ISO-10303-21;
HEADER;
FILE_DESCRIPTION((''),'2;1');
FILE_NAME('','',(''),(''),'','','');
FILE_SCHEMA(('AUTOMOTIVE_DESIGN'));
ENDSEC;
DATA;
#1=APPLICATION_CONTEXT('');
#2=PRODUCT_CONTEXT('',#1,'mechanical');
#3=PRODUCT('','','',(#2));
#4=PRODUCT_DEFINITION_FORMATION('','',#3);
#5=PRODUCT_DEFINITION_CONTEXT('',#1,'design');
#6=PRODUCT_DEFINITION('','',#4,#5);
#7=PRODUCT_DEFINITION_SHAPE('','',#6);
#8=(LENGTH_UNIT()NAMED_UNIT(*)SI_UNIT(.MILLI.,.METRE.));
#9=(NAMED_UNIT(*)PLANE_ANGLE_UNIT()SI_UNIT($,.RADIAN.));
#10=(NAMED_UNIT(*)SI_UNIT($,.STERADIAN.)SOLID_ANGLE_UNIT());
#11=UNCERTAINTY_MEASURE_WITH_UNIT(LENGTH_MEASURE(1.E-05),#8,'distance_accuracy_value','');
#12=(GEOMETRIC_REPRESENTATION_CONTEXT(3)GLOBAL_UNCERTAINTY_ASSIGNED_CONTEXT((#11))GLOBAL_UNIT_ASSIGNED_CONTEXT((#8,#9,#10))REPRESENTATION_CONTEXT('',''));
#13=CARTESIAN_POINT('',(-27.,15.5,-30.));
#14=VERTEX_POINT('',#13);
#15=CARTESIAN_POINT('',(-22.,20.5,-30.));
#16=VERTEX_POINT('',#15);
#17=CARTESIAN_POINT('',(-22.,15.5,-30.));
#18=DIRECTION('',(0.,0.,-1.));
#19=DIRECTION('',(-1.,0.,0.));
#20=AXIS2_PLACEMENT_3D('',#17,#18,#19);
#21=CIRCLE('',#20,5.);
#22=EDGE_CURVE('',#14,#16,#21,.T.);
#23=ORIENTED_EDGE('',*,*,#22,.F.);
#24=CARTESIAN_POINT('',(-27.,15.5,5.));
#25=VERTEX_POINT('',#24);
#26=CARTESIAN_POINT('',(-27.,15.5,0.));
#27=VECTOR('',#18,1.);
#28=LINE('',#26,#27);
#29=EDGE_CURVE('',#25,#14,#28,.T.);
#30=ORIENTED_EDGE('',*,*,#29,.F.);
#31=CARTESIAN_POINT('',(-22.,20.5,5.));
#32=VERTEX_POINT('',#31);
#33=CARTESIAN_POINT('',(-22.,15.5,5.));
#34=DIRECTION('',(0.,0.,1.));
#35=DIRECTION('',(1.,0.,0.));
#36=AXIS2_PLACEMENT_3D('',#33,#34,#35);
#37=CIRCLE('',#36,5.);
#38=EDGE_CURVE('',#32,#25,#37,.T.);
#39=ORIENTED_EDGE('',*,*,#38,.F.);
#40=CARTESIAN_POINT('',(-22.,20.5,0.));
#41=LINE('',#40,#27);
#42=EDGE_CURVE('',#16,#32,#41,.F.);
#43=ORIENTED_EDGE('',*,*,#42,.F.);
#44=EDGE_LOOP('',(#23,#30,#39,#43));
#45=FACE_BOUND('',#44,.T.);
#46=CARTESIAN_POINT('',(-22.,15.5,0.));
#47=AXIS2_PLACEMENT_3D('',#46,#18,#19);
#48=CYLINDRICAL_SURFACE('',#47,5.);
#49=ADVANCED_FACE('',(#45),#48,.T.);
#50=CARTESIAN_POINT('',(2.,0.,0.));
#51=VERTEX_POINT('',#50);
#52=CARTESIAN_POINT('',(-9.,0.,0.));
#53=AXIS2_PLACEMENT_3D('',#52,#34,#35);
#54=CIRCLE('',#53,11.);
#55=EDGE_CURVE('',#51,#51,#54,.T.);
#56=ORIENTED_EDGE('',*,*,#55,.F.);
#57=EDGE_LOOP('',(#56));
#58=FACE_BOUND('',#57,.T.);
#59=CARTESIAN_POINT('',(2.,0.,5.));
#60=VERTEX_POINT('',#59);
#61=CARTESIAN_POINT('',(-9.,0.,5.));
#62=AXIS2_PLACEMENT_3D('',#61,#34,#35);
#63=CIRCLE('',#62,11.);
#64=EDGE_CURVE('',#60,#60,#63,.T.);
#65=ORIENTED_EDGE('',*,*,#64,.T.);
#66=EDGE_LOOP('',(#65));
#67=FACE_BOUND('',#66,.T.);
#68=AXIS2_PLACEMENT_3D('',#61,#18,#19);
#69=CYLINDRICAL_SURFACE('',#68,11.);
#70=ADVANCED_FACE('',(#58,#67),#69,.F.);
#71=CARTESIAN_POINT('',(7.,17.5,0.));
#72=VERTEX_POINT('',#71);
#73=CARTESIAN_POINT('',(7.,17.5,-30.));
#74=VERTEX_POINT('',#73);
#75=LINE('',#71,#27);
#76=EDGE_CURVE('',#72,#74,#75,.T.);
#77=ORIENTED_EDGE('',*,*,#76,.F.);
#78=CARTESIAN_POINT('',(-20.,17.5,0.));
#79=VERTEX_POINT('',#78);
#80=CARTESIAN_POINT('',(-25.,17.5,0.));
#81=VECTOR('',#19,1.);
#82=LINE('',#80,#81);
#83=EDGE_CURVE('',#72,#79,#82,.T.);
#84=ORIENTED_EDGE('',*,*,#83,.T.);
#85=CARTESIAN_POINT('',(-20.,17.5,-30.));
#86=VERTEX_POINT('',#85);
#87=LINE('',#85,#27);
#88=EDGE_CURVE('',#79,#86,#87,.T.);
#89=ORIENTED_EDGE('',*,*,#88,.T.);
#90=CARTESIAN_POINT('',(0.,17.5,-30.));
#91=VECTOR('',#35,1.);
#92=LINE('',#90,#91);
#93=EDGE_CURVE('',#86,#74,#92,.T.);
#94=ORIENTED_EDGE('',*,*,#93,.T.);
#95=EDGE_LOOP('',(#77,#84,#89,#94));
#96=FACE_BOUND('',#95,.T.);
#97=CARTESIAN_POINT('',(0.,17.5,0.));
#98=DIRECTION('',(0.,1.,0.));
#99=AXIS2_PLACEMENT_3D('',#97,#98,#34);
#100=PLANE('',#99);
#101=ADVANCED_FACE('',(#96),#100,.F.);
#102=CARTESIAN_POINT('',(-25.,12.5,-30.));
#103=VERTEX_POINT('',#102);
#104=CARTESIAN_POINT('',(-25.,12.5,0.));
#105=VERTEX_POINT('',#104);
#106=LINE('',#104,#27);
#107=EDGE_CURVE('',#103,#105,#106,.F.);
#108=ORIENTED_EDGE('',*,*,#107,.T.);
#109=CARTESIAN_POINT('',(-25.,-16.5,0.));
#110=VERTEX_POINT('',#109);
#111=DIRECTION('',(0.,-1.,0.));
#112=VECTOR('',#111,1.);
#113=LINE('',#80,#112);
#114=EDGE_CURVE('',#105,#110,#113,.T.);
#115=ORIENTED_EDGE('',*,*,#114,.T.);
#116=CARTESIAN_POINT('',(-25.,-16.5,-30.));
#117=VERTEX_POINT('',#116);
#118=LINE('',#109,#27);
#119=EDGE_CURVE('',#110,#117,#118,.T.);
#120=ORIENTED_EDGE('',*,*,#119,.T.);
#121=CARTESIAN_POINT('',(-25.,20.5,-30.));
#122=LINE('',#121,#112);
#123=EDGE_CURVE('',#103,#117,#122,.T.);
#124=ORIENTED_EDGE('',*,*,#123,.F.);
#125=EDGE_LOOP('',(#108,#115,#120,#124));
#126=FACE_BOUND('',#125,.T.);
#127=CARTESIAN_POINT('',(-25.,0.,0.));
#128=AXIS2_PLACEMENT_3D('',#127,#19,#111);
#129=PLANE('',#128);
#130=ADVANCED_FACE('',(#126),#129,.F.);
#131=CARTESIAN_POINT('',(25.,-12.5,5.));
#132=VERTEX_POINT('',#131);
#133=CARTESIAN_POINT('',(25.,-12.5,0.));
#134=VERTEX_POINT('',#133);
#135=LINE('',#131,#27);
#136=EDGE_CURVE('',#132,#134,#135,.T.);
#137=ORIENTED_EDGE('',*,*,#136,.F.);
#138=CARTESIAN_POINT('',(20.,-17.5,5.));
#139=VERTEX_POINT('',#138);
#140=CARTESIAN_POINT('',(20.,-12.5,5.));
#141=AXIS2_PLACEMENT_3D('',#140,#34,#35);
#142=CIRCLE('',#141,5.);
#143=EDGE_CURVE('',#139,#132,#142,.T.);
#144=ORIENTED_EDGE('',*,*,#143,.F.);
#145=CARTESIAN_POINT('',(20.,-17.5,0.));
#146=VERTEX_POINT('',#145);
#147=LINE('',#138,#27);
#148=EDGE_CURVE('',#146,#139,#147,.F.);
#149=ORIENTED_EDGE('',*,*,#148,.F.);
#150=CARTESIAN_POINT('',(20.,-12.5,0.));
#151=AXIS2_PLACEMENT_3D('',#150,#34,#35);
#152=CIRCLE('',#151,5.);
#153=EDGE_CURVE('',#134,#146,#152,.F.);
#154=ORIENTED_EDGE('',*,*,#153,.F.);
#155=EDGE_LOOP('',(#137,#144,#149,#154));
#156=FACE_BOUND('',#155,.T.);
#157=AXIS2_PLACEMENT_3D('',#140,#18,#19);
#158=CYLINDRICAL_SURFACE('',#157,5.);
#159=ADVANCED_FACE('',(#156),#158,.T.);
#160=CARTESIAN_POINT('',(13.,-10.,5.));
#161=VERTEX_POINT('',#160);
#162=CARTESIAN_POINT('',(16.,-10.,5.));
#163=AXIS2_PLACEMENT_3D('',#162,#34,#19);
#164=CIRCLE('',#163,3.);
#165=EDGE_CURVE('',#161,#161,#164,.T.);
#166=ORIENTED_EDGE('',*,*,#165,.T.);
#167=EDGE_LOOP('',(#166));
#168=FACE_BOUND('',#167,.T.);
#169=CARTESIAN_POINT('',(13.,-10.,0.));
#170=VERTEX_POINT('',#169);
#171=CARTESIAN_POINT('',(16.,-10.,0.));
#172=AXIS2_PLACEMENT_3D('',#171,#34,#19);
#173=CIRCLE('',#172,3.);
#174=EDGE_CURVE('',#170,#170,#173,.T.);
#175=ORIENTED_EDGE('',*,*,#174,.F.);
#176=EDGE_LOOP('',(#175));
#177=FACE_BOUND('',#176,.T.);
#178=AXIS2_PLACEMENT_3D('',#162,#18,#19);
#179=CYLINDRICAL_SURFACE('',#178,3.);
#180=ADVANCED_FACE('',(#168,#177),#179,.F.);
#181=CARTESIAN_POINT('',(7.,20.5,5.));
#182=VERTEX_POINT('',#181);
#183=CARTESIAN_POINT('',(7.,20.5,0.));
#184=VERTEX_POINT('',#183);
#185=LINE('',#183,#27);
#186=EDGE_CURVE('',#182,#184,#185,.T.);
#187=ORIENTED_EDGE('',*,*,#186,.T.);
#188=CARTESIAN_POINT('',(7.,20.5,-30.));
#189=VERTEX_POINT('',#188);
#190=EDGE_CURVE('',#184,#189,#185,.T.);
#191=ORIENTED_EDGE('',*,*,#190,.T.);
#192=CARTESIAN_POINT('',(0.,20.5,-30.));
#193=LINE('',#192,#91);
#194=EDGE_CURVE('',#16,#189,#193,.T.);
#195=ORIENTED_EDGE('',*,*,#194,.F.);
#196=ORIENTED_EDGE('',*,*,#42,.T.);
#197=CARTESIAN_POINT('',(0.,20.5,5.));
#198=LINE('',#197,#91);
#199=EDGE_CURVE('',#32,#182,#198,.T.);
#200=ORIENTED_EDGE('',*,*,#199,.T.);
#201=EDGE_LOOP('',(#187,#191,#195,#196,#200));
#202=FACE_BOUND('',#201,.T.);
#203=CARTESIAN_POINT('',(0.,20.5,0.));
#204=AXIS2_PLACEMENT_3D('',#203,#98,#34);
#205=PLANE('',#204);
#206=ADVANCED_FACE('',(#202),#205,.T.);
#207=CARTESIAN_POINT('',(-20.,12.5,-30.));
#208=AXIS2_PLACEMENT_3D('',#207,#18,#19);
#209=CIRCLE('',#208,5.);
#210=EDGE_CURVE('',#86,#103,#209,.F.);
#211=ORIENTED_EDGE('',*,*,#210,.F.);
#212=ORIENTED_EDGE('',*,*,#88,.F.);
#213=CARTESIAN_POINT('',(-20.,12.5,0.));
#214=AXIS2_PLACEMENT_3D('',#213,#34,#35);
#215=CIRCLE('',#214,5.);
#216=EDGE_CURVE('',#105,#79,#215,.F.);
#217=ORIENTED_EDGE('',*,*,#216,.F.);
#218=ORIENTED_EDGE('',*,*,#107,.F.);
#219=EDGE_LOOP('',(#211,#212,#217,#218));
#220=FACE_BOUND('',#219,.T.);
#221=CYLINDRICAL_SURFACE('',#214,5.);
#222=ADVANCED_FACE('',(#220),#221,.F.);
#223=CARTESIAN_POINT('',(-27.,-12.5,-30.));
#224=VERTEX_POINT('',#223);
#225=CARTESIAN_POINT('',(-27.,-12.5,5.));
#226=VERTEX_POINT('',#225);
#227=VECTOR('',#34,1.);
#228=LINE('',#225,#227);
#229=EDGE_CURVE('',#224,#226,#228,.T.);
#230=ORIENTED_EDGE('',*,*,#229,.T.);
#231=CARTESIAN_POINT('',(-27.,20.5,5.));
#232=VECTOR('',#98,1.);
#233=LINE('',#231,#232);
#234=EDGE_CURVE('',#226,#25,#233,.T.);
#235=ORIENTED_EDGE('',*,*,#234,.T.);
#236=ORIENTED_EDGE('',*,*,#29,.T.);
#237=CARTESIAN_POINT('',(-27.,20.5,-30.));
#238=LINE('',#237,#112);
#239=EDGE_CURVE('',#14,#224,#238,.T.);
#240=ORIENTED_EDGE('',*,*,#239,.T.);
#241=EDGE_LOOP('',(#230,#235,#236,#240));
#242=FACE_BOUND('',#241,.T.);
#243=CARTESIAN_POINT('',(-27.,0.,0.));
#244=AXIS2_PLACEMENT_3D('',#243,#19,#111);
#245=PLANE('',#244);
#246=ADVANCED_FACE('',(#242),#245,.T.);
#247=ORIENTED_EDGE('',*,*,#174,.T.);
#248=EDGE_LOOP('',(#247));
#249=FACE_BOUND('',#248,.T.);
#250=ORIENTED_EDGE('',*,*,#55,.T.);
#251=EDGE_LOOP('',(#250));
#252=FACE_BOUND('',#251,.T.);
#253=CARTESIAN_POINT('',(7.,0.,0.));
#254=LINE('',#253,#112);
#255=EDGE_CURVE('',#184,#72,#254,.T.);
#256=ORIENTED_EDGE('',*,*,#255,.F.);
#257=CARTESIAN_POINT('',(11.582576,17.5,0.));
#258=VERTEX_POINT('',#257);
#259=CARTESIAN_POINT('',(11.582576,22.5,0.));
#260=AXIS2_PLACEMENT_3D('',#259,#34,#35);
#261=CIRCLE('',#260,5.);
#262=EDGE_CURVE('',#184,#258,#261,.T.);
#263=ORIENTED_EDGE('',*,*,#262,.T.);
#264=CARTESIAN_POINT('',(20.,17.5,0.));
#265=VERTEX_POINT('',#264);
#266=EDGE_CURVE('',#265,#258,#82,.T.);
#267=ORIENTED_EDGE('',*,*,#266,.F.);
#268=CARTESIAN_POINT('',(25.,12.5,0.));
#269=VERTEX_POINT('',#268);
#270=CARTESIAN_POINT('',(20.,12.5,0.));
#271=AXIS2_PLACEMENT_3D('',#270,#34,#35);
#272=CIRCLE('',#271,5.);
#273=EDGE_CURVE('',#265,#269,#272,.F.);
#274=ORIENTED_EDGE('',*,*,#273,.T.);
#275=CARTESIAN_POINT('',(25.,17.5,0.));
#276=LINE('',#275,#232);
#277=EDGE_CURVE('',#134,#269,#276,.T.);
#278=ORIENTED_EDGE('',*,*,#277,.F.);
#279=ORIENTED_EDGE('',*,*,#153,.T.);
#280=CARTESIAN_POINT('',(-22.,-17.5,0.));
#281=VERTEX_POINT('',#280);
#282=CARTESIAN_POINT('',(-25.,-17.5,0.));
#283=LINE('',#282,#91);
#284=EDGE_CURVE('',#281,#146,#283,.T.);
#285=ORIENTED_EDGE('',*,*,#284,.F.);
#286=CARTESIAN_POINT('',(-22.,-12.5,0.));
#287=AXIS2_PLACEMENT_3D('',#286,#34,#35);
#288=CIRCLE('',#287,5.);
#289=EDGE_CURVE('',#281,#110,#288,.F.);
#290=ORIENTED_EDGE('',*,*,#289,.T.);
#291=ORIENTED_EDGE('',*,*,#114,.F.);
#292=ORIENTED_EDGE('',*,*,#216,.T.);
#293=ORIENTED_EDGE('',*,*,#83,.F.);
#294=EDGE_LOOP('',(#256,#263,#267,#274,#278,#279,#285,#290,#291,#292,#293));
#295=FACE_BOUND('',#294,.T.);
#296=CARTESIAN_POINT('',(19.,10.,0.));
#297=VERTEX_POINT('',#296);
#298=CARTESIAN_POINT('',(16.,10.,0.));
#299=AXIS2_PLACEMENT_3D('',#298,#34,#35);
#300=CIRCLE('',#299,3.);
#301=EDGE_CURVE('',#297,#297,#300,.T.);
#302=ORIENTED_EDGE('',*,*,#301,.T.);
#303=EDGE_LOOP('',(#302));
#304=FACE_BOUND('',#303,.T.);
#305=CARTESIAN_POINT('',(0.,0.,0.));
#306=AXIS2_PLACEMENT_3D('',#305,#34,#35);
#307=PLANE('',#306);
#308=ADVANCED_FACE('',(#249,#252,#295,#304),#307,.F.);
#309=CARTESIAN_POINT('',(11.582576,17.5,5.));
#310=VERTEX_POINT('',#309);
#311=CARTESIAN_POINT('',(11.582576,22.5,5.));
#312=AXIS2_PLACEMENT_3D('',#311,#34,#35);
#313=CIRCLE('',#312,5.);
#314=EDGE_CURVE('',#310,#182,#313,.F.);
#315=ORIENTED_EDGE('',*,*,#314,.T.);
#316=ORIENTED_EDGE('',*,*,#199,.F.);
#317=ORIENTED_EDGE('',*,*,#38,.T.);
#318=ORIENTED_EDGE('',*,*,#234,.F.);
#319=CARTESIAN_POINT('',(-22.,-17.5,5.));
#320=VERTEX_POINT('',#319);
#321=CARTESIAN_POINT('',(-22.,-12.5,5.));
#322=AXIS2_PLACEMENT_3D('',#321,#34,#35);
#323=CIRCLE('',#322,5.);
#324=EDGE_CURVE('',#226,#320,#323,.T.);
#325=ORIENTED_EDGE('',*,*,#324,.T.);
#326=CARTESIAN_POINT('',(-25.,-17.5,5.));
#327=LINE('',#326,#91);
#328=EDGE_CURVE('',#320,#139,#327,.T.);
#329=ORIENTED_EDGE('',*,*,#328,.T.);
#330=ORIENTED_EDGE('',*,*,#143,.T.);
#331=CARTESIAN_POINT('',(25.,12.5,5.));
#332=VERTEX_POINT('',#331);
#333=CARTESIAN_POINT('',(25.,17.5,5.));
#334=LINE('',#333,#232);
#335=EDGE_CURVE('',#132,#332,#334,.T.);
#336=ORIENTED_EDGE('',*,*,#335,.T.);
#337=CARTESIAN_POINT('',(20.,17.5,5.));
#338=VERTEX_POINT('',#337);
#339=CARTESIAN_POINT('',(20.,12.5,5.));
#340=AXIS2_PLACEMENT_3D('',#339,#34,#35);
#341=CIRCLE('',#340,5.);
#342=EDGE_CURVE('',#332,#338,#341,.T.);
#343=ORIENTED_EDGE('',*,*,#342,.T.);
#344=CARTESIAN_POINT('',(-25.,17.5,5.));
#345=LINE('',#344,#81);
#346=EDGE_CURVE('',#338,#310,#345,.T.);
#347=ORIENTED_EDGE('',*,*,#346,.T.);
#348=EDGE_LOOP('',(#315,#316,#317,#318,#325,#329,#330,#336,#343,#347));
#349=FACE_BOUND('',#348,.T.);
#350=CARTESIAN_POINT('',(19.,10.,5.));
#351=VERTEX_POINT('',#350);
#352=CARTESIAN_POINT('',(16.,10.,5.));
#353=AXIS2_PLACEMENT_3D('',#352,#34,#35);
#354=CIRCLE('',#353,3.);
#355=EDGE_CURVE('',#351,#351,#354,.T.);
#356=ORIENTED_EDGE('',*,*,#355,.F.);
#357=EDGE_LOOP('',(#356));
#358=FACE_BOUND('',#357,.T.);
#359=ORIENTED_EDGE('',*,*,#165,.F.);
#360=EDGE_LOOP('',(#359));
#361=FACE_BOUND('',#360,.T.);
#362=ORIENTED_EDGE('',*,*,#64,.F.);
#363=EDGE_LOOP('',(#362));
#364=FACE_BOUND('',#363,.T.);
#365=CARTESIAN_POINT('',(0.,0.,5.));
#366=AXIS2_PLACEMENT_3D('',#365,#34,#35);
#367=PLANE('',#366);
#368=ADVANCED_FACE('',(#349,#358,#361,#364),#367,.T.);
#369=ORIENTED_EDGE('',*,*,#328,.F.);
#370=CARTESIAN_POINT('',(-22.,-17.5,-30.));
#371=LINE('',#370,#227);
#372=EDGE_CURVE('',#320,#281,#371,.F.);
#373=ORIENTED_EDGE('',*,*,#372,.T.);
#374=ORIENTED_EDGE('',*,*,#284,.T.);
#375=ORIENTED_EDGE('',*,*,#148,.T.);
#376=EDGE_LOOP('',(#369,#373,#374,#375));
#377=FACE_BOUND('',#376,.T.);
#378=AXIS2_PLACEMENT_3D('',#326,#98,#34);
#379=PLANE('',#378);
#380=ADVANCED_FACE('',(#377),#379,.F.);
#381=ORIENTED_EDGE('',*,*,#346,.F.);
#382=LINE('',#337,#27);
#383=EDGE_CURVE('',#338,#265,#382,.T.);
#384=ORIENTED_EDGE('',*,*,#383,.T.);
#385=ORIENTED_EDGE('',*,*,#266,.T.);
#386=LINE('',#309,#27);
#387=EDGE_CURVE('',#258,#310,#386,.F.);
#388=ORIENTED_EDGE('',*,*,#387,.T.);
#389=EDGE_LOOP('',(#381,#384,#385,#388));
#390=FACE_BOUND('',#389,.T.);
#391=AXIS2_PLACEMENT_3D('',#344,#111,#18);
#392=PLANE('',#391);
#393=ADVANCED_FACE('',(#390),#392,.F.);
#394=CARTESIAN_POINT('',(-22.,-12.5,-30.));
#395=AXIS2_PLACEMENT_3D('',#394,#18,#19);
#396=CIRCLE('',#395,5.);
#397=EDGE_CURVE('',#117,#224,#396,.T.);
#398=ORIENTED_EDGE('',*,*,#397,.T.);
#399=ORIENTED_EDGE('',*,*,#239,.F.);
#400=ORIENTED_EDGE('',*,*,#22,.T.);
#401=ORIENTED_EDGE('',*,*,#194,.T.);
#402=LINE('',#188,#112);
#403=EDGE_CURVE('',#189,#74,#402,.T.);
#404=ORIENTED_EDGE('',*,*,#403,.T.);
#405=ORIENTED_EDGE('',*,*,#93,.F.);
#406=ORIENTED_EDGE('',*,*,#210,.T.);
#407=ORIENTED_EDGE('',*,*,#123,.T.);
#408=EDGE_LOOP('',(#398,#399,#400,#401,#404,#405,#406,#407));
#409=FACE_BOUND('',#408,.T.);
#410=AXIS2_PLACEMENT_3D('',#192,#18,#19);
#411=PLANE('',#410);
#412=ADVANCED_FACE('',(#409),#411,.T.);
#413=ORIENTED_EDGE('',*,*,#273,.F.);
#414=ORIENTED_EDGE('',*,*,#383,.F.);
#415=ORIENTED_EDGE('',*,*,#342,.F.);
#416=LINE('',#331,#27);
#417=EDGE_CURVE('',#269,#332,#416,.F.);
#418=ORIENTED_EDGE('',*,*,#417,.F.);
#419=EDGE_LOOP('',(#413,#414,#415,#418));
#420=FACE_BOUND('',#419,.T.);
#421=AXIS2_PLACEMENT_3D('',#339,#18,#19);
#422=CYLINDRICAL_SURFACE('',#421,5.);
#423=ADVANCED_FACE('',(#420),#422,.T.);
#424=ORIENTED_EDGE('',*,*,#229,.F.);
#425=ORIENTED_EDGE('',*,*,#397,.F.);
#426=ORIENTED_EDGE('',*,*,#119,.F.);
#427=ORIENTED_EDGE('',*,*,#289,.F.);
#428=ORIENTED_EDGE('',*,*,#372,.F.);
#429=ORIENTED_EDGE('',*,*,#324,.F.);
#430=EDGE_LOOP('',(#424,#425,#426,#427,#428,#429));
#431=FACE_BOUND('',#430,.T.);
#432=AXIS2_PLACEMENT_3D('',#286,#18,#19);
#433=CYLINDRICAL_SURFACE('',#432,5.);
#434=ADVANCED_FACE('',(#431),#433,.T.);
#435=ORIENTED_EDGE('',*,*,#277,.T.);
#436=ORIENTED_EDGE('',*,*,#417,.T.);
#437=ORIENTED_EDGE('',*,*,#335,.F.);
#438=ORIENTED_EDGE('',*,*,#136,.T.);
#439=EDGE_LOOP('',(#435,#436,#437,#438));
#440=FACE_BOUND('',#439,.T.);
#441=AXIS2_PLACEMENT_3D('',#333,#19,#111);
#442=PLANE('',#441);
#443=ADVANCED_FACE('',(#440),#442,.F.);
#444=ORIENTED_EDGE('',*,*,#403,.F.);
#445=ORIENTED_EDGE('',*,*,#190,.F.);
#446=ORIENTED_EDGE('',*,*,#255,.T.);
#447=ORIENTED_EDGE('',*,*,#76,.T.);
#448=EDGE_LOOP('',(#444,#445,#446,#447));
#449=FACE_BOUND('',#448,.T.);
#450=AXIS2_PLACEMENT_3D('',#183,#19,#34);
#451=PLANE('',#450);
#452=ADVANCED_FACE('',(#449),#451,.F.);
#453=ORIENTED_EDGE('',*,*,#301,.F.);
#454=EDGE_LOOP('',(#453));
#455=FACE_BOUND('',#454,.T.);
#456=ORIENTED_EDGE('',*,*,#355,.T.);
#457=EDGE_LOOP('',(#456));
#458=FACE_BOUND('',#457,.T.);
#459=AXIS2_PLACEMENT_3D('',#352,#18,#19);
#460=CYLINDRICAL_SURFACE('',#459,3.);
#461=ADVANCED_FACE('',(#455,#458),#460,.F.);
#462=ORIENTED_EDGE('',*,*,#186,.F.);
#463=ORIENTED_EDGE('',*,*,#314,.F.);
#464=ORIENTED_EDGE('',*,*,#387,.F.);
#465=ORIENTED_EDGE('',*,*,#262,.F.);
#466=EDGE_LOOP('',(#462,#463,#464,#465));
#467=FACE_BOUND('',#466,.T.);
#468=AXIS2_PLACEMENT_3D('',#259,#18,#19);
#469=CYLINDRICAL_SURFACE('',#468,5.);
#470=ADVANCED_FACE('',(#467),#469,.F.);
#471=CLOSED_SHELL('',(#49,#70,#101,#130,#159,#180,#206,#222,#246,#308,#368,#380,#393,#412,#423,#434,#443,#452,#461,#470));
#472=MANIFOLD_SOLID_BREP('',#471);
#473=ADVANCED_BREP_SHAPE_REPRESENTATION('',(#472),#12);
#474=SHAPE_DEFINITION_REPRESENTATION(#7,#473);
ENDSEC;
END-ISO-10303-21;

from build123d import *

# Parameters (mm, degrees)
SKETCH1_W           = 50
SKETCH1_H           = 35
SKETCH1_R           = 11
SKETCH1_R_2         = 3
BOSS_EXTRUDE1_DEPTH = 5
SKETCH2_W           = 32
SKETCH2_H           = 30
SKETCH2_H_2         = 5
BOSS_EXTRUDE2_DEPTH = 3
SKETCH3_W           = 35
SKETCH3_H           = 38
BOSS_EXTRUDE3_DEPTH = 2
FILLET1_R           = 5


with BuildPart() as part:
    # Sketch1 → Boss-Extrude1 (new body)
    with BuildSketch(Plane.XY):
        Rectangle(SKETCH1_W, SKETCH1_H)
        with Locations((-9, 0)):
            Circle(SKETCH1_R, mode=Mode.SUBTRACT)
        with Locations(Location((16, -10, 0), (0, 0, 180))):
            Circle(SKETCH1_R_2, mode=Mode.SUBTRACT)
        with Locations((16, 10)):
            Circle(SKETCH1_R_2, mode=Mode.SUBTRACT)
    extrude(amount=BOSS_EXTRUDE1_DEPTH)

    # Sketch2 → Boss-Extrude2 (add)
    with BuildSketch(Plane(origin=(0, 17.5, 0), x_dir=(1, 0, 0), z_dir=(0, 1, 0))):
        with Locations((-9, 15)):
            Rectangle(SKETCH2_W, SKETCH2_H)
        with Locations((-9, -2.5)):
            Rectangle(SKETCH2_W, SKETCH2_H_2)
    extrude(amount=BOSS_EXTRUDE2_DEPTH)

    # Sketch3 → Boss-Extrude3 (add)
    with BuildSketch(Plane.ZY.offset(25)):
        with Locations((-12.5, 1.5)):
            Rectangle(SKETCH3_W, SKETCH3_H)
    extrude(amount=BOSS_EXTRUDE3_DEPTH)

    # Fillet1
    # the kernel refuses this fillet: 5 mm, written as the material it adds along each edge
    with BuildSketch(Plane(origin=(7, 17.5, 5), x_dir=(1, 0, 0), z_dir=(0, 0, -1))) as fillet1_piece_1:
        with BuildLine():
            CenterArc((4.582575695, -5), FILLET1_R, 90, 66.421821522)
            Line((0, -3), (0, 0))
            Line((0, 0), (4.582575695, 0))
        make_face()
    extrude(amount=5)
    with BuildSketch(Plane(origin=(-25, 17.5, -30), x_dir=(0, -1, 0), z_dir=(0, 0, 1))) as fillet1_piece_2:
        with BuildLine():
            CenterArc((FILLET1_R, FILLET1_R), FILLET1_R, 180, 90)
            Line((0, FILLET1_R), (0, 0))
            Line((0, 0), (FILLET1_R, 0))
        make_face()
    extrude(amount=30)
    # the kernel refuses this fillet: 5 mm, written as the material it takes off along each edge
    with BuildSketch(Plane(origin=(25, 17.5, -12.5), x_dir=(-1, 0, 0), z_dir=(0, 0, 1)), Plane(origin=(25, -17.5, -12.5), x_dir=(0, 1, 0), z_dir=(0, 0, 1))) as fillet1_2_piece_1:
        with BuildLine():
            CenterArc((FILLET1_R, FILLET1_R), FILLET1_R, 180, 90)
            Line((0, FILLET1_R), (0, 0))
            Line((0, 0), (FILLET1_R, 0))
        make_face()
    extrude(amount=30, mode=Mode.SUBTRACT)
    with BuildSketch(Plane(origin=(-27, -17.5, -42.5), x_dir=(1, 0, 0), z_dir=(0, 0, 1))) as fillet1_2_piece_2:
        with BuildLine():
            CenterArc((FILLET1_R, FILLET1_R), FILLET1_R, 180, 90)
            Line((0, FILLET1_R), (0, 0))
            Line((0, 0), (FILLET1_R, 0))
        make_face()
    extrude(amount=60, mode=Mode.SUBTRACT)
    with BuildSketch(Plane(origin=(-27, 20.5, 17.5), x_dir=(0, -1, 0), z_dir=(0, 0, -1))) as fillet1_2_piece_3:
        with BuildLine():
            CenterArc((FILLET1_R, -FILLET1_R), FILLET1_R, 90, 90)
            Line((0, -FILLET1_R), (0, 0))
            Line((0, 0), (FILLET1_R, 0))
        make_face()
    extrude(amount=60, mode=Mode.SUBTRACT)


solid = part.part
